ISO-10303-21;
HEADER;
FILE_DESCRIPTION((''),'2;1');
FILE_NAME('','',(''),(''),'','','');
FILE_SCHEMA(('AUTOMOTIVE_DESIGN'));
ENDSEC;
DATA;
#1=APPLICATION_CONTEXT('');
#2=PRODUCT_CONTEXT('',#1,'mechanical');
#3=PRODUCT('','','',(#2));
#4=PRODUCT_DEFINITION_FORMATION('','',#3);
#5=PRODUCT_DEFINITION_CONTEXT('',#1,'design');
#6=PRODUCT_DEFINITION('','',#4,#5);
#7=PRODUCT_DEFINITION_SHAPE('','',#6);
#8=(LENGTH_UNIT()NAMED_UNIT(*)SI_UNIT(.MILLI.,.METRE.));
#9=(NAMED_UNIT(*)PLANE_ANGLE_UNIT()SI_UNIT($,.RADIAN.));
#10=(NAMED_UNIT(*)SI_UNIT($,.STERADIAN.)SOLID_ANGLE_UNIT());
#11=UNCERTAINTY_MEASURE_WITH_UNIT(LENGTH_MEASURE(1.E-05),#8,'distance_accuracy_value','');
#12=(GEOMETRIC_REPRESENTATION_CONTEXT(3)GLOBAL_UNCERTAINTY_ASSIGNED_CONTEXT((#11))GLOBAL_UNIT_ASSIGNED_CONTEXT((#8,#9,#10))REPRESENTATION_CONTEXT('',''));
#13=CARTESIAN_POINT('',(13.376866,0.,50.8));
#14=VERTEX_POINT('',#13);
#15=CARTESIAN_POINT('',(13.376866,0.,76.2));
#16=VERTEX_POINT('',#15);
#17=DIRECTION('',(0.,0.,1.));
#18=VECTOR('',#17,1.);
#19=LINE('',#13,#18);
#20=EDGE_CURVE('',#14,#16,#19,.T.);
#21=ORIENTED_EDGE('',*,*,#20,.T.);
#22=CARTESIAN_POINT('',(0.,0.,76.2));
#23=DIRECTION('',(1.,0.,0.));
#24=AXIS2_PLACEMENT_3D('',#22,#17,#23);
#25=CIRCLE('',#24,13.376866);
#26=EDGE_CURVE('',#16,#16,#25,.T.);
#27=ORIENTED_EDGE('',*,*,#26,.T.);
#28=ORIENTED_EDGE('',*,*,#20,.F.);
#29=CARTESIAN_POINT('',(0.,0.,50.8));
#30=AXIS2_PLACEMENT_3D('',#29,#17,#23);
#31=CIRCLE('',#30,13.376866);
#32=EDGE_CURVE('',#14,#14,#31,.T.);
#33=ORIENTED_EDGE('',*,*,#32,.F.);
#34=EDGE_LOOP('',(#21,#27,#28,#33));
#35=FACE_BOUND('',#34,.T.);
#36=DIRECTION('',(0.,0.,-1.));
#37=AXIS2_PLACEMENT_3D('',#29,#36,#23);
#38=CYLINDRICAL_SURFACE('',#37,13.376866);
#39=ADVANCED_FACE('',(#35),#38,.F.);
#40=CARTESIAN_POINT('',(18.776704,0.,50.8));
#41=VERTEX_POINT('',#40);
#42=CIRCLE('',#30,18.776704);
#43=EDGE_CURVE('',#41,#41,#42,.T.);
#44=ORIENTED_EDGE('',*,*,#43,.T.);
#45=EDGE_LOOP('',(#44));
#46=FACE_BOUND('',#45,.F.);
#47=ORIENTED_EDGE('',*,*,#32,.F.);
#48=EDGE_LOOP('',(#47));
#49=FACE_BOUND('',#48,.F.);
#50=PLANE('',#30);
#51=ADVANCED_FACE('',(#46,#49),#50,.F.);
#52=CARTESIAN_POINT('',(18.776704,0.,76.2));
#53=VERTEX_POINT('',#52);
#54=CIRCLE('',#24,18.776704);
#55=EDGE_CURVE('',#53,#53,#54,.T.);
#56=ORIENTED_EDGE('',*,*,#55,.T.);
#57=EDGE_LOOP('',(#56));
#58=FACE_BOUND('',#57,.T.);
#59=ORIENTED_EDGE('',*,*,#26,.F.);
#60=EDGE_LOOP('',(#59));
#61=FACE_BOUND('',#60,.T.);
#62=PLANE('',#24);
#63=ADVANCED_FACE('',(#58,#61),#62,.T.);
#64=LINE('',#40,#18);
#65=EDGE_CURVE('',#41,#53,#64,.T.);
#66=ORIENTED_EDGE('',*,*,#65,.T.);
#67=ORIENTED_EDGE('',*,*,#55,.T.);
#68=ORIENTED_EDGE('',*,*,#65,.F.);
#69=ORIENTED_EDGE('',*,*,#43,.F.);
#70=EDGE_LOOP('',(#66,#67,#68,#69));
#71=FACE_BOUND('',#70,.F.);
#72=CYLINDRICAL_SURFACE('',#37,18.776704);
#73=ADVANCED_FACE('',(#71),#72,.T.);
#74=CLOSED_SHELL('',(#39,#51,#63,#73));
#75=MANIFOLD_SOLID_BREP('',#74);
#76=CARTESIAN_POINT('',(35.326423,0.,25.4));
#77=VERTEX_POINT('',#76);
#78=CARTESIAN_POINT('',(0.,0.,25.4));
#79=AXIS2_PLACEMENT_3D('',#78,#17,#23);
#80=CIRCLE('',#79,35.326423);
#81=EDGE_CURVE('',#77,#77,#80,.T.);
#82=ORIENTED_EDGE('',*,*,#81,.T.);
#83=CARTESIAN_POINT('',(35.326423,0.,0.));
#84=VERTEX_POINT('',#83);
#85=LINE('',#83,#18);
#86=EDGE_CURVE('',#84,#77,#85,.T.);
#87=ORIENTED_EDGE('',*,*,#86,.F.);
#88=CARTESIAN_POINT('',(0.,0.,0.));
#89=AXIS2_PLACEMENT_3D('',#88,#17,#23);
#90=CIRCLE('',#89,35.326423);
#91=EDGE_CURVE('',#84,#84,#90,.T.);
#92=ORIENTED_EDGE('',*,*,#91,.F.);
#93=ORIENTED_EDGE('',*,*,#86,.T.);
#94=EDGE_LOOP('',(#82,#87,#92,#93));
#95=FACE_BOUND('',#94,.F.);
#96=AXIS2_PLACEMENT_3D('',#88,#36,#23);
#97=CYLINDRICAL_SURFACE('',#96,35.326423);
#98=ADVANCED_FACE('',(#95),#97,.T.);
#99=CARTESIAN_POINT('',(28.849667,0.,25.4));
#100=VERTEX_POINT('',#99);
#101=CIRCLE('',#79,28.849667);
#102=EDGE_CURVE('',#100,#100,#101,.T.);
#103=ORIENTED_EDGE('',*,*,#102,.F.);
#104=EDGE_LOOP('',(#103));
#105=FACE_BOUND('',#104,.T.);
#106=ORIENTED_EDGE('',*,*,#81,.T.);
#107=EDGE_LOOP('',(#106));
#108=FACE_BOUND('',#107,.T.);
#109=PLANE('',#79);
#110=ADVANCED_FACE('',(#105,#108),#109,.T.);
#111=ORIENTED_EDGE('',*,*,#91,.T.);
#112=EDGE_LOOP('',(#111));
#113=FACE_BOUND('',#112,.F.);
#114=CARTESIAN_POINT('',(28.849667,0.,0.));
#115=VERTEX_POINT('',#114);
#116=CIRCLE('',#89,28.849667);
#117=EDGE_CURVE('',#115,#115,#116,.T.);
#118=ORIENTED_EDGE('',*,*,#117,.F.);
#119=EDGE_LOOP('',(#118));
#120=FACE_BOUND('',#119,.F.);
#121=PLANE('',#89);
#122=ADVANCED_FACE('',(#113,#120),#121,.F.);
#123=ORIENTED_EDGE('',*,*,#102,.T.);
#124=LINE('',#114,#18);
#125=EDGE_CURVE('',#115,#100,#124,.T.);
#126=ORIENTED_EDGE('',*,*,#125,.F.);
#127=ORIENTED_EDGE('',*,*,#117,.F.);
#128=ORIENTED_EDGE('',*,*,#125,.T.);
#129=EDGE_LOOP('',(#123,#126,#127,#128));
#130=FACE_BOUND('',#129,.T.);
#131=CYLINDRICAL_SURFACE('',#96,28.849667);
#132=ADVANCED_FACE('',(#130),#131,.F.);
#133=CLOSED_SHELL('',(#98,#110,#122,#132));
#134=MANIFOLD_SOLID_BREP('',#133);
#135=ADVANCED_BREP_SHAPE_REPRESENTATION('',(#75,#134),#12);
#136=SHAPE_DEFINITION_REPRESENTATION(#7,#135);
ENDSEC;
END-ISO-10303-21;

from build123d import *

# Parameters (mm, degrees)
F0_R     = 35.3264234519
F0_R_2   = 28.8496672687
F1_DEPTH = 25.4
F3_R     = 18.7767042544
F3_R_2   = 13.3768660961
F4_DEPTH = 25.4


# Not quite as in the source:
# - the program builds the solid bodies; features that only make, move or delete a surface that nothing else refers to are left out


with BuildPart() as f1:
    # F0 (on Top) → F1 (new body)
    with BuildSketch(Plane.XY):
        Circle(F0_R)
        Circle(F0_R_2, mode=Mode.SUBTRACT)
    extrude(amount=F1_DEPTH)


with BuildPart() as f4:
    # F3 (on offset) → F4 (new body)
    with BuildSketch(Plane.XY.offset(50.8)):
        Circle(F3_R)
        Circle(F3_R_2, mode=Mode.SUBTRACT)
    extrude(amount=F4_DEPTH)


solid = Compound([f1.part, f4.part])
